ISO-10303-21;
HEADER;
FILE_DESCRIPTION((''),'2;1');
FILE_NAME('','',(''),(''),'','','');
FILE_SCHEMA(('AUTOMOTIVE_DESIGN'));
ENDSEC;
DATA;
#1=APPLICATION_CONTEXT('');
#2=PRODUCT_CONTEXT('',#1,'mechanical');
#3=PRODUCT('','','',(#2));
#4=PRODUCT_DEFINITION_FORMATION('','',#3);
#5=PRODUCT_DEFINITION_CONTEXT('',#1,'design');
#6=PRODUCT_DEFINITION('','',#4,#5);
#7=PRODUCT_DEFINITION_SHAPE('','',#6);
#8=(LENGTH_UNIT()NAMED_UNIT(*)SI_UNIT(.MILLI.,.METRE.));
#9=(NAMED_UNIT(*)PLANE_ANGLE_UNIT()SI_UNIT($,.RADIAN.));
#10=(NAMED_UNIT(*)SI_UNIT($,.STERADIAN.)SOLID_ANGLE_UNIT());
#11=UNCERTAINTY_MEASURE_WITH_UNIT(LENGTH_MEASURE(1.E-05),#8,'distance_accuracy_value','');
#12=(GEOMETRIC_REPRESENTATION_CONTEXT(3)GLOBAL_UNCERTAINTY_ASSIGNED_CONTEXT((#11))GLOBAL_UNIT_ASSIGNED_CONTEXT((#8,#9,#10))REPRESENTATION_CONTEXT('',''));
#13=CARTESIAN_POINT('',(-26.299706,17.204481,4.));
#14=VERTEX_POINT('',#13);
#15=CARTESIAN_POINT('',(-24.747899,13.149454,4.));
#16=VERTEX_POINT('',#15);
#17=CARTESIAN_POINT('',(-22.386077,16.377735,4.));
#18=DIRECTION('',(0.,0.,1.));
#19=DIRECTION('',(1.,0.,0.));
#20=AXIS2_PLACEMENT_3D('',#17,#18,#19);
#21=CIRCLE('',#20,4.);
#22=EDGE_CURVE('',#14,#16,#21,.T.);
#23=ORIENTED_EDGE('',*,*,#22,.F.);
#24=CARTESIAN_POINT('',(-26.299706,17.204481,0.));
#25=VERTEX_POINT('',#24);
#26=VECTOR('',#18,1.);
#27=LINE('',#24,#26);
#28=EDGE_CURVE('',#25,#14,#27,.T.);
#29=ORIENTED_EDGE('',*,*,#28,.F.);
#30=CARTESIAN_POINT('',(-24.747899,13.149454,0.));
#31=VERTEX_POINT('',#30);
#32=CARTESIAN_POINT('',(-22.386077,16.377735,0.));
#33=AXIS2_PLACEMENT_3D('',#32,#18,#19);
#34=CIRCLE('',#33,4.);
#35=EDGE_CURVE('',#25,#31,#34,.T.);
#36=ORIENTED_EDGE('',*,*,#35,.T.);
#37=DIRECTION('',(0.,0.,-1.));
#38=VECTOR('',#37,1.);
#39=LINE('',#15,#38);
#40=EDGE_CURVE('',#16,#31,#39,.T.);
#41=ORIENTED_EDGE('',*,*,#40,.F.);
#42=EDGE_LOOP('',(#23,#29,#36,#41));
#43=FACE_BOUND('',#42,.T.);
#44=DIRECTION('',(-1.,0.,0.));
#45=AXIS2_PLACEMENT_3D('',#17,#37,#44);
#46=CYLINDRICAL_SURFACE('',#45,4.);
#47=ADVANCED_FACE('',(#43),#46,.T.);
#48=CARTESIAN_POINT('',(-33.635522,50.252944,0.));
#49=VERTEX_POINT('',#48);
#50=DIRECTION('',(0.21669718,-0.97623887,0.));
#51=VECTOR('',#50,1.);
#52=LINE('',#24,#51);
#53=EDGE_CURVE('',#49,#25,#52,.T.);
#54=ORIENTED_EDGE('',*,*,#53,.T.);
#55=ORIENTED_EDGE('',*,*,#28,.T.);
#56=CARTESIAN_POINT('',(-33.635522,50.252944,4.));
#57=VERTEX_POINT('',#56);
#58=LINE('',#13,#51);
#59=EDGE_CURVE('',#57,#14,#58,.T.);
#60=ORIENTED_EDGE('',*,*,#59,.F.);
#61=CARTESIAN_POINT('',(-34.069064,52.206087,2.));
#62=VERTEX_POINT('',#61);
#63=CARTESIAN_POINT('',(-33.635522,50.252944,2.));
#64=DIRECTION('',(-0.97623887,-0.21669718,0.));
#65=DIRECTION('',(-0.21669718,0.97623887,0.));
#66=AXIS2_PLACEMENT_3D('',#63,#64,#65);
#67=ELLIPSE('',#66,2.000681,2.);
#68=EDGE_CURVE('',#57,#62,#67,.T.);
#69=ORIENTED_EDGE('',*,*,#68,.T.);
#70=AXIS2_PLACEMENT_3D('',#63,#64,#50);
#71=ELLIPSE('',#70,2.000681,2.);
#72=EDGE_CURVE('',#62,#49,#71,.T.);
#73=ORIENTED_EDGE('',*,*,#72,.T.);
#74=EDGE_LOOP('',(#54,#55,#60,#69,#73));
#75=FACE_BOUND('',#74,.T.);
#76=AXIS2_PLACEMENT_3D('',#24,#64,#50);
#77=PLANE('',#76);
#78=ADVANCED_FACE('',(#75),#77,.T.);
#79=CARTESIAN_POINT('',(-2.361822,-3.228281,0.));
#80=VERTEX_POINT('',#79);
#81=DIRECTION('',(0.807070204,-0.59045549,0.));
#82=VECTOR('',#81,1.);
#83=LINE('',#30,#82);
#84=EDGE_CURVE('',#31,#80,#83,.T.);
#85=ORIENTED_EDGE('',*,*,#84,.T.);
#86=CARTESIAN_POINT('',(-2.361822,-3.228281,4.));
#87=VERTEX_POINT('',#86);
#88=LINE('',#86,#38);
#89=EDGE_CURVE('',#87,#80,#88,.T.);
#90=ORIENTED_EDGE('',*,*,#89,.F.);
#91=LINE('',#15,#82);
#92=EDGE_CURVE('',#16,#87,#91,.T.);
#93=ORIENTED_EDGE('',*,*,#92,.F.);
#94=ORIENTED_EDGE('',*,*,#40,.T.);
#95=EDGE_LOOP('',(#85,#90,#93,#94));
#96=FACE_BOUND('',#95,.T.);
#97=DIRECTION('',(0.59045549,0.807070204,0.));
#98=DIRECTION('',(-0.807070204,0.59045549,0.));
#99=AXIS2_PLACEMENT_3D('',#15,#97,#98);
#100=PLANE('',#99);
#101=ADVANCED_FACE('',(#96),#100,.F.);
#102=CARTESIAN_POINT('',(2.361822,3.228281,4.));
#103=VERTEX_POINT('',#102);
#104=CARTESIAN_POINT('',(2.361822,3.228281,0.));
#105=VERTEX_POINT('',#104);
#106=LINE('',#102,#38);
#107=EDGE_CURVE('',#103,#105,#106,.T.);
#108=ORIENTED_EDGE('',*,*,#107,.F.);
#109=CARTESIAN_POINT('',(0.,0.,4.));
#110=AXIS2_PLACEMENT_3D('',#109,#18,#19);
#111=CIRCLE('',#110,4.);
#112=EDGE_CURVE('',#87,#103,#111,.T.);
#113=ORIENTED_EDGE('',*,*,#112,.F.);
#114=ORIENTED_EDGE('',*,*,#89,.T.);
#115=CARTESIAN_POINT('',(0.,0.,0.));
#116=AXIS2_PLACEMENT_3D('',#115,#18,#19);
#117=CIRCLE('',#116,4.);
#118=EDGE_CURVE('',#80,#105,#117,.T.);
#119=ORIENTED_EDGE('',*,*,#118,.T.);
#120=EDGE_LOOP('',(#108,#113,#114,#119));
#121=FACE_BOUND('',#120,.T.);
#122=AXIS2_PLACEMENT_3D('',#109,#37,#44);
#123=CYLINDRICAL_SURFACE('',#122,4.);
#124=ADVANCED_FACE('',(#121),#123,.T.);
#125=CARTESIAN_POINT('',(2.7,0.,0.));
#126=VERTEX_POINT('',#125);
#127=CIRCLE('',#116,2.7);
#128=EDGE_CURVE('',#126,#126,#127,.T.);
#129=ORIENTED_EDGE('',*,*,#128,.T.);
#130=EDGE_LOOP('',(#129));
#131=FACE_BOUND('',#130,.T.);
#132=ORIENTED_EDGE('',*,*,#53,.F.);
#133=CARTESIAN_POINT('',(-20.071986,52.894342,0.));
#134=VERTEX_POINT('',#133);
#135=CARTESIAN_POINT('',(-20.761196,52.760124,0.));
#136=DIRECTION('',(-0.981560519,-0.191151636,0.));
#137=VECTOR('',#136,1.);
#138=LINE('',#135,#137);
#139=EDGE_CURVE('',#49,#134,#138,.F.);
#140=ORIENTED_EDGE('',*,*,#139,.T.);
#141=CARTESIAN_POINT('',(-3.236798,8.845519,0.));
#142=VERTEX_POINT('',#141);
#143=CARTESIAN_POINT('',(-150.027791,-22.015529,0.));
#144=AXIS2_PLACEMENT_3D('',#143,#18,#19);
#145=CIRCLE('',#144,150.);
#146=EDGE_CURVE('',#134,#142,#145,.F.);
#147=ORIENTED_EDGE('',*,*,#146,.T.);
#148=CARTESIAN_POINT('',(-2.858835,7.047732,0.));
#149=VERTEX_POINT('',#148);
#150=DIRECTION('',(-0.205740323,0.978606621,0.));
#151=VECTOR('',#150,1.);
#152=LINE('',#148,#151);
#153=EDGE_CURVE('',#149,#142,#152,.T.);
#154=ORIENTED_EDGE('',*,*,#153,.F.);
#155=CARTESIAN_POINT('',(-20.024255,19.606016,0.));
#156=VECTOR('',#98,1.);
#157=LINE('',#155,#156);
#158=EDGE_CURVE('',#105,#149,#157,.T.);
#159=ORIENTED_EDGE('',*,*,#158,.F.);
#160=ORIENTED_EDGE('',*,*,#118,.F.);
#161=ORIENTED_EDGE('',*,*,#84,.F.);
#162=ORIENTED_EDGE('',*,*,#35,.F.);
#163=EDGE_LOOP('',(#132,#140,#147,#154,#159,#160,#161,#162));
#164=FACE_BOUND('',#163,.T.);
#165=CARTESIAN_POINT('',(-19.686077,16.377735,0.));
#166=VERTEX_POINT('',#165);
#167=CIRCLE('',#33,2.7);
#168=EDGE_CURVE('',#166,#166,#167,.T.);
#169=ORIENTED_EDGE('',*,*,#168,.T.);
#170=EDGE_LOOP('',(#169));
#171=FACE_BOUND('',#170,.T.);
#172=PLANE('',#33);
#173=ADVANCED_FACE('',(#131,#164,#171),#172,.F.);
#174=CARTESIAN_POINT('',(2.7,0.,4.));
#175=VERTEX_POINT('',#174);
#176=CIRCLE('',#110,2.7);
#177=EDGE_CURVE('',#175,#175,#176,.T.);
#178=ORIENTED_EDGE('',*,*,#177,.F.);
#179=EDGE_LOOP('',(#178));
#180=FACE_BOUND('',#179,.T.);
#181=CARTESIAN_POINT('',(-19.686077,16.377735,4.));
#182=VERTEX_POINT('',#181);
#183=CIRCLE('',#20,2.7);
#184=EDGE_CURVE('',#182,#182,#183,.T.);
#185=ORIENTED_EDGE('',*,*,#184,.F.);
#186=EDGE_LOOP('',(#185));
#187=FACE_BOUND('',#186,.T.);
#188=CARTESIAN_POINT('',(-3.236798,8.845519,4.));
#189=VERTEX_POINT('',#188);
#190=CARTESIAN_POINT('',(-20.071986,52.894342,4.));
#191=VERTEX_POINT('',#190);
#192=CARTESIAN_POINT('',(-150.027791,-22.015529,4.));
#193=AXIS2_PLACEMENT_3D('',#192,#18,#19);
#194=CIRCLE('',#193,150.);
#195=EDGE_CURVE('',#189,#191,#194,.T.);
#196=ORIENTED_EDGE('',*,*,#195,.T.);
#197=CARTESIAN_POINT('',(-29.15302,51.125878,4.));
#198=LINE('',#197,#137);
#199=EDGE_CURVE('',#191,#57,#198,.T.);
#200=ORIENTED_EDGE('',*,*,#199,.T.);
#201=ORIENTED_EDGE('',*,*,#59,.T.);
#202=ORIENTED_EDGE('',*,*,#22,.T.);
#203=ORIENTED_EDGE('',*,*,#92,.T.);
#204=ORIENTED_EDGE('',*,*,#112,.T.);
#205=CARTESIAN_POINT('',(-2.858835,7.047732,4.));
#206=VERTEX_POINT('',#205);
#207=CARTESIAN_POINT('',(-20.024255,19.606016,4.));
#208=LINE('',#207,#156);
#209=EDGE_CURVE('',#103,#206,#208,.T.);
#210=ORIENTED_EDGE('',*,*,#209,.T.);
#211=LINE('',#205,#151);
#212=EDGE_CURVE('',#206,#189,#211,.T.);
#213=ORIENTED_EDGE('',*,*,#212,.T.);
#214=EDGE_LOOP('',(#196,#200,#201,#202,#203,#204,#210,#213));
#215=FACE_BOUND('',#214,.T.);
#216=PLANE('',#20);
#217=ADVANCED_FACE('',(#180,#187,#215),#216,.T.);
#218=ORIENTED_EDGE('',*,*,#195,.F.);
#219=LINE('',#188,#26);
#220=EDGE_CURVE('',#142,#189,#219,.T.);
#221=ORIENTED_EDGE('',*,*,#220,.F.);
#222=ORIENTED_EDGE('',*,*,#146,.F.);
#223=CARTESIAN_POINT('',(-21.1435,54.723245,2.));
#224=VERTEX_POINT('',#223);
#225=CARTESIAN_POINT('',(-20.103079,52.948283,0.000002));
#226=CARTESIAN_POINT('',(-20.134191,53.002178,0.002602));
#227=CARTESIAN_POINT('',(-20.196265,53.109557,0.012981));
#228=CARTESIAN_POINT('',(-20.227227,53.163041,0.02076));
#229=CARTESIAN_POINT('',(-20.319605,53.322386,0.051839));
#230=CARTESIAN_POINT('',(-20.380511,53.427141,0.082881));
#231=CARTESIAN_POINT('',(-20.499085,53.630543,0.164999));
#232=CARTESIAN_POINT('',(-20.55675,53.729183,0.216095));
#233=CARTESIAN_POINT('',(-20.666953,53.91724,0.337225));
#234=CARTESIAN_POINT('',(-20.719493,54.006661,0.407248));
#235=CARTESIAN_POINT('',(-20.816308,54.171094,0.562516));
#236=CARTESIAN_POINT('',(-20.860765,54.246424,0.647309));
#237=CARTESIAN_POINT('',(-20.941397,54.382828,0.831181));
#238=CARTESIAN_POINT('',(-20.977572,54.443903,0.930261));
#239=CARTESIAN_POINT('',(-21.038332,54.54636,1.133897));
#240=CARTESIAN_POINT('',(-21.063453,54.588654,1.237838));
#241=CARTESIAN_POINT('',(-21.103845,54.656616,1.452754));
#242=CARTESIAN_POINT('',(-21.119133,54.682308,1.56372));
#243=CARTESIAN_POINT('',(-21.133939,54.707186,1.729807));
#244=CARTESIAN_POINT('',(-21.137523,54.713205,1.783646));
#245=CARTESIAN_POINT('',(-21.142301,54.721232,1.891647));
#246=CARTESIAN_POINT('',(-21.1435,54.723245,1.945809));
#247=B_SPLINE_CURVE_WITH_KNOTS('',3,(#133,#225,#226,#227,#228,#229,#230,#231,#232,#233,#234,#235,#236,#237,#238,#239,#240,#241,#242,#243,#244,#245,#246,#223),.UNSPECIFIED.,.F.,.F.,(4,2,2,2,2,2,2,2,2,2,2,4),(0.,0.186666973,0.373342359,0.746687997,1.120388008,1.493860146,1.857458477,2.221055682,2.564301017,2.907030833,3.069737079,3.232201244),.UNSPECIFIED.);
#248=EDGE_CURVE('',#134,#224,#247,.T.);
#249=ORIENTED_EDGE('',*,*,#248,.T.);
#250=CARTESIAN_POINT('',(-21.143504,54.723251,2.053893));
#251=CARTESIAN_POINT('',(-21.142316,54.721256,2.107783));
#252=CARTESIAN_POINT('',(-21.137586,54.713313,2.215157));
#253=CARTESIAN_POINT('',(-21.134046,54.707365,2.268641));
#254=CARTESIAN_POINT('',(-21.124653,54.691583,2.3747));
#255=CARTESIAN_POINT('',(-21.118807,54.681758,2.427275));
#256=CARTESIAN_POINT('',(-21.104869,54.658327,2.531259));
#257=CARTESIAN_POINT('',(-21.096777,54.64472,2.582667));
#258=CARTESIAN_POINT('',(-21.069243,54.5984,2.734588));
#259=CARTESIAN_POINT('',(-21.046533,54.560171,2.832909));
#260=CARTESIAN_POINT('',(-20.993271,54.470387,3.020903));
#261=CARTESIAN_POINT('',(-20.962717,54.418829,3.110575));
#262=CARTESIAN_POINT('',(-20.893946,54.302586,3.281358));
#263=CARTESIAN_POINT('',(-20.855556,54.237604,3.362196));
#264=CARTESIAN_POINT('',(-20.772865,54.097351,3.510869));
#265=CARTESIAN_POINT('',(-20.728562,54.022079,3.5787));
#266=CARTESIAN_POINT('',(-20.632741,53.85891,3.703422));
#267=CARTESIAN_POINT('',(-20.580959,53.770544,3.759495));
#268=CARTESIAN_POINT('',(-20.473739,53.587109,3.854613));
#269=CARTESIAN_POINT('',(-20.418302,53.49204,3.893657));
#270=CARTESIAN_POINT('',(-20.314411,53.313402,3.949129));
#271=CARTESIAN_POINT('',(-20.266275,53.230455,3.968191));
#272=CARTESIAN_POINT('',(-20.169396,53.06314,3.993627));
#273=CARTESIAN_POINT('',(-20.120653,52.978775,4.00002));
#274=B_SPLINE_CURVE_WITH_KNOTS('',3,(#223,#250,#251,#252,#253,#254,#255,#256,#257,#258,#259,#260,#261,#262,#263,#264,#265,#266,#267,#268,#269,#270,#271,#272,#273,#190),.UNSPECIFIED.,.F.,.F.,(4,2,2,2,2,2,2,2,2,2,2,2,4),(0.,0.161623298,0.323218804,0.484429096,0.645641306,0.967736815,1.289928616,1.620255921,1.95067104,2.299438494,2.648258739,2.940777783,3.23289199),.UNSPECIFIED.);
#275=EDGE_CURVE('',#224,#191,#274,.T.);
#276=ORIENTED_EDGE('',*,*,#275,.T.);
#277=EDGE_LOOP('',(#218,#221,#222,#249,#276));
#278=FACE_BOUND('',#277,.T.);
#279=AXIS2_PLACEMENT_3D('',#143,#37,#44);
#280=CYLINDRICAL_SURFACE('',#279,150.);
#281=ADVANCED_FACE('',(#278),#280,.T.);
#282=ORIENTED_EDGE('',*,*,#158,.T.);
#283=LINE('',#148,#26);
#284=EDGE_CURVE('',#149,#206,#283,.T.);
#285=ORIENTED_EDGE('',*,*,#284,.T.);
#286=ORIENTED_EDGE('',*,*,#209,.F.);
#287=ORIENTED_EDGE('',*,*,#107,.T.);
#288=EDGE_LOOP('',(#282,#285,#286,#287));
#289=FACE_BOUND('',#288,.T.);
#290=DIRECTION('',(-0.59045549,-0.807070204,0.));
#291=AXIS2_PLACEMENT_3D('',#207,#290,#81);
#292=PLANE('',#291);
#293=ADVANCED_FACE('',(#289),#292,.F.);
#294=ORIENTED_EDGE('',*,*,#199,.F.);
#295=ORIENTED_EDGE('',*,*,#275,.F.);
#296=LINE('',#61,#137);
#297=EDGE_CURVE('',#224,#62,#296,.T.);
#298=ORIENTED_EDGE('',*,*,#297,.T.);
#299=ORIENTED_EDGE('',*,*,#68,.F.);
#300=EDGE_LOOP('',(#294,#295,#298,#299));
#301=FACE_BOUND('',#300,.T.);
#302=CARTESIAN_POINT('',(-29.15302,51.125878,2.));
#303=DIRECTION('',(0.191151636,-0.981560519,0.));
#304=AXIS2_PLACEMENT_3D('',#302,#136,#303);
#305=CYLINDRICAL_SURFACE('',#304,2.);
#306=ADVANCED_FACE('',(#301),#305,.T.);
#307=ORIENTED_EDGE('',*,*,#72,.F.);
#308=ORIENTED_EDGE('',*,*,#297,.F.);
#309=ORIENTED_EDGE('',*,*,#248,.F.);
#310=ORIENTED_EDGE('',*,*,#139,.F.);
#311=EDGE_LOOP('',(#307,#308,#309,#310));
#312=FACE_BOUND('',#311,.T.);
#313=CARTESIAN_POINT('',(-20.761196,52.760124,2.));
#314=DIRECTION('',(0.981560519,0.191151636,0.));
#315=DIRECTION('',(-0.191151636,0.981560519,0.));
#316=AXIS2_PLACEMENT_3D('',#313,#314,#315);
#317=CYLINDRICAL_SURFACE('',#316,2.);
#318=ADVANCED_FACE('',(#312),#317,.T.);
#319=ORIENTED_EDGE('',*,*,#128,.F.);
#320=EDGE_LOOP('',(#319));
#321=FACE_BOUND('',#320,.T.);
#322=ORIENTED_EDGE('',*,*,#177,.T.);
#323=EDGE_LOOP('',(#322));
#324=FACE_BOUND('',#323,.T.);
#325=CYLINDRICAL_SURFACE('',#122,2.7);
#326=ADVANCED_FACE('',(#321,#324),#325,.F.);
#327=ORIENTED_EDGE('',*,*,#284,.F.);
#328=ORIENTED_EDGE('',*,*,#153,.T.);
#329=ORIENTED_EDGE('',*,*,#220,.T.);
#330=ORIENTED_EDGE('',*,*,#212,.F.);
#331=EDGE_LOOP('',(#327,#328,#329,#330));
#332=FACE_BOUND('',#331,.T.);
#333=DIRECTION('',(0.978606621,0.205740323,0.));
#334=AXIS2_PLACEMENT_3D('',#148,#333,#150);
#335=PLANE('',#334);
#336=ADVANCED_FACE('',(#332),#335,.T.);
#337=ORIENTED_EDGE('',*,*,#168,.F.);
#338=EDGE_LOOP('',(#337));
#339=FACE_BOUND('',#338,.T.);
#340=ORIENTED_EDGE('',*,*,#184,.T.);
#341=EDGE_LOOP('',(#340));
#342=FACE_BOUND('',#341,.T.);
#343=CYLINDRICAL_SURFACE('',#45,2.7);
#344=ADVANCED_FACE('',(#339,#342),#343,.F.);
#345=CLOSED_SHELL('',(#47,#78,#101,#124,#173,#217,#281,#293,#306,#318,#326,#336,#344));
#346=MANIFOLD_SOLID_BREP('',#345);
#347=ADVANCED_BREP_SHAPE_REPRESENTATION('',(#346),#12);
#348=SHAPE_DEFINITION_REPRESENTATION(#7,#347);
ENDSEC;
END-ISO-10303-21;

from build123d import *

# Parameters (mm, degrees)
SKETCH1_R           = 2.7
BOSS_EXTRUDE1_DEPTH = 4
BOSS_EXTRUDE2_DEPTH = 4
FILLET4_R           = 150
FILLET5_R           = 2


# Some blends are built 0.0001 mm under size
with BuildPart() as part:
    # Sketch1 → Boss-Extrude1 (new body)
    with BuildSketch(Plane.XY):
        with BuildLine():
            Line((-24.747899147, 13.14945447), (-2.361821958, -3.228280818))
            ThreePointArc((-2.361821958, -3.228280818), (3.228280818, -2.361821958), (2.361821958, 3.228280818))
            Line((2.361821958, 3.228280818), (-20.024255231, 19.606016105))
            ThreePointArc((-20.024255231, 19.606016105), (-25.614358007, 18.739557246), (-24.747899147, 13.14945447))
        make_face()
        Circle(SKETCH1_R, mode=Mode.SUBTRACT)
        with Locations((-22.386077189, 16.377735287)):
            Circle(SKETCH1_R, mode=Mode.SUBTRACT)
    extrude(amount=BOSS_EXTRUDE1_DEPTH)

    # Sketch2 → Boss-Extrude2 (add, through all)
    with BuildSketch(Plane.XY.offset(4)):
        with BuildLine():
            Line((-26.299706155, 17.204480908), (-34.069064165, 52.206086792))
            Line((-34.069064165, 52.206086792), (-21.14349971, 54.723244673))
            Line((-21.14349971, 54.723244673), (-13.231740333, 56.386597335))
            Line((-13.231740333, 56.386597335), (-2.8588348, 7.047732243))
            Line((-2.8588348, 7.047732243), (-13.354395565, 14.726322576))
            Line((-13.354395565, 14.726322576), (-20.024255231, 19.606016105))
            ThreePointArc((-20.024255231, 19.606016105), (-23.81571668, 20.113525823), (-26.299706155, 17.204480908))
        make_face()
    extrude(amount=-BOSS_EXTRUDE2_DEPTH)

    # Fillet4
    # the kernel refuses this fillet: 150 mm, written as the material it takes off along each edge
    with BuildSketch(Plane(origin=(-13.231740333, 56.386597335, 125.450940965), x_dir=(0.20574032293470337, -0.9786066214361745, 0), z_dir=(0, 0, -1))) as fillet4_piece_1:
        with BuildLine():
            CenterArc((48.580376386, 150), FILLET4_R, 251.102921571, 18.897078429)
            Line((0, 8.084718828), (0, 0))
            Line((0, 0), (48.580376386, 0))
        make_face()
    extrude(amount=246.90188193, mode=Mode.SUBTRACT)

    # Fillet5
    fillet5_edges = [part.edges().sort_by_distance(p)[0] for p in [
        (-27.606281937, 53.464665733, 4),
        (-27.606281937, 53.464665733, 0),
    ]]
    fillet(fillet5_edges, radius=FILLET5_R - 0.0001)  # a hair under: the kernel refuses the full size


solid = part.part
